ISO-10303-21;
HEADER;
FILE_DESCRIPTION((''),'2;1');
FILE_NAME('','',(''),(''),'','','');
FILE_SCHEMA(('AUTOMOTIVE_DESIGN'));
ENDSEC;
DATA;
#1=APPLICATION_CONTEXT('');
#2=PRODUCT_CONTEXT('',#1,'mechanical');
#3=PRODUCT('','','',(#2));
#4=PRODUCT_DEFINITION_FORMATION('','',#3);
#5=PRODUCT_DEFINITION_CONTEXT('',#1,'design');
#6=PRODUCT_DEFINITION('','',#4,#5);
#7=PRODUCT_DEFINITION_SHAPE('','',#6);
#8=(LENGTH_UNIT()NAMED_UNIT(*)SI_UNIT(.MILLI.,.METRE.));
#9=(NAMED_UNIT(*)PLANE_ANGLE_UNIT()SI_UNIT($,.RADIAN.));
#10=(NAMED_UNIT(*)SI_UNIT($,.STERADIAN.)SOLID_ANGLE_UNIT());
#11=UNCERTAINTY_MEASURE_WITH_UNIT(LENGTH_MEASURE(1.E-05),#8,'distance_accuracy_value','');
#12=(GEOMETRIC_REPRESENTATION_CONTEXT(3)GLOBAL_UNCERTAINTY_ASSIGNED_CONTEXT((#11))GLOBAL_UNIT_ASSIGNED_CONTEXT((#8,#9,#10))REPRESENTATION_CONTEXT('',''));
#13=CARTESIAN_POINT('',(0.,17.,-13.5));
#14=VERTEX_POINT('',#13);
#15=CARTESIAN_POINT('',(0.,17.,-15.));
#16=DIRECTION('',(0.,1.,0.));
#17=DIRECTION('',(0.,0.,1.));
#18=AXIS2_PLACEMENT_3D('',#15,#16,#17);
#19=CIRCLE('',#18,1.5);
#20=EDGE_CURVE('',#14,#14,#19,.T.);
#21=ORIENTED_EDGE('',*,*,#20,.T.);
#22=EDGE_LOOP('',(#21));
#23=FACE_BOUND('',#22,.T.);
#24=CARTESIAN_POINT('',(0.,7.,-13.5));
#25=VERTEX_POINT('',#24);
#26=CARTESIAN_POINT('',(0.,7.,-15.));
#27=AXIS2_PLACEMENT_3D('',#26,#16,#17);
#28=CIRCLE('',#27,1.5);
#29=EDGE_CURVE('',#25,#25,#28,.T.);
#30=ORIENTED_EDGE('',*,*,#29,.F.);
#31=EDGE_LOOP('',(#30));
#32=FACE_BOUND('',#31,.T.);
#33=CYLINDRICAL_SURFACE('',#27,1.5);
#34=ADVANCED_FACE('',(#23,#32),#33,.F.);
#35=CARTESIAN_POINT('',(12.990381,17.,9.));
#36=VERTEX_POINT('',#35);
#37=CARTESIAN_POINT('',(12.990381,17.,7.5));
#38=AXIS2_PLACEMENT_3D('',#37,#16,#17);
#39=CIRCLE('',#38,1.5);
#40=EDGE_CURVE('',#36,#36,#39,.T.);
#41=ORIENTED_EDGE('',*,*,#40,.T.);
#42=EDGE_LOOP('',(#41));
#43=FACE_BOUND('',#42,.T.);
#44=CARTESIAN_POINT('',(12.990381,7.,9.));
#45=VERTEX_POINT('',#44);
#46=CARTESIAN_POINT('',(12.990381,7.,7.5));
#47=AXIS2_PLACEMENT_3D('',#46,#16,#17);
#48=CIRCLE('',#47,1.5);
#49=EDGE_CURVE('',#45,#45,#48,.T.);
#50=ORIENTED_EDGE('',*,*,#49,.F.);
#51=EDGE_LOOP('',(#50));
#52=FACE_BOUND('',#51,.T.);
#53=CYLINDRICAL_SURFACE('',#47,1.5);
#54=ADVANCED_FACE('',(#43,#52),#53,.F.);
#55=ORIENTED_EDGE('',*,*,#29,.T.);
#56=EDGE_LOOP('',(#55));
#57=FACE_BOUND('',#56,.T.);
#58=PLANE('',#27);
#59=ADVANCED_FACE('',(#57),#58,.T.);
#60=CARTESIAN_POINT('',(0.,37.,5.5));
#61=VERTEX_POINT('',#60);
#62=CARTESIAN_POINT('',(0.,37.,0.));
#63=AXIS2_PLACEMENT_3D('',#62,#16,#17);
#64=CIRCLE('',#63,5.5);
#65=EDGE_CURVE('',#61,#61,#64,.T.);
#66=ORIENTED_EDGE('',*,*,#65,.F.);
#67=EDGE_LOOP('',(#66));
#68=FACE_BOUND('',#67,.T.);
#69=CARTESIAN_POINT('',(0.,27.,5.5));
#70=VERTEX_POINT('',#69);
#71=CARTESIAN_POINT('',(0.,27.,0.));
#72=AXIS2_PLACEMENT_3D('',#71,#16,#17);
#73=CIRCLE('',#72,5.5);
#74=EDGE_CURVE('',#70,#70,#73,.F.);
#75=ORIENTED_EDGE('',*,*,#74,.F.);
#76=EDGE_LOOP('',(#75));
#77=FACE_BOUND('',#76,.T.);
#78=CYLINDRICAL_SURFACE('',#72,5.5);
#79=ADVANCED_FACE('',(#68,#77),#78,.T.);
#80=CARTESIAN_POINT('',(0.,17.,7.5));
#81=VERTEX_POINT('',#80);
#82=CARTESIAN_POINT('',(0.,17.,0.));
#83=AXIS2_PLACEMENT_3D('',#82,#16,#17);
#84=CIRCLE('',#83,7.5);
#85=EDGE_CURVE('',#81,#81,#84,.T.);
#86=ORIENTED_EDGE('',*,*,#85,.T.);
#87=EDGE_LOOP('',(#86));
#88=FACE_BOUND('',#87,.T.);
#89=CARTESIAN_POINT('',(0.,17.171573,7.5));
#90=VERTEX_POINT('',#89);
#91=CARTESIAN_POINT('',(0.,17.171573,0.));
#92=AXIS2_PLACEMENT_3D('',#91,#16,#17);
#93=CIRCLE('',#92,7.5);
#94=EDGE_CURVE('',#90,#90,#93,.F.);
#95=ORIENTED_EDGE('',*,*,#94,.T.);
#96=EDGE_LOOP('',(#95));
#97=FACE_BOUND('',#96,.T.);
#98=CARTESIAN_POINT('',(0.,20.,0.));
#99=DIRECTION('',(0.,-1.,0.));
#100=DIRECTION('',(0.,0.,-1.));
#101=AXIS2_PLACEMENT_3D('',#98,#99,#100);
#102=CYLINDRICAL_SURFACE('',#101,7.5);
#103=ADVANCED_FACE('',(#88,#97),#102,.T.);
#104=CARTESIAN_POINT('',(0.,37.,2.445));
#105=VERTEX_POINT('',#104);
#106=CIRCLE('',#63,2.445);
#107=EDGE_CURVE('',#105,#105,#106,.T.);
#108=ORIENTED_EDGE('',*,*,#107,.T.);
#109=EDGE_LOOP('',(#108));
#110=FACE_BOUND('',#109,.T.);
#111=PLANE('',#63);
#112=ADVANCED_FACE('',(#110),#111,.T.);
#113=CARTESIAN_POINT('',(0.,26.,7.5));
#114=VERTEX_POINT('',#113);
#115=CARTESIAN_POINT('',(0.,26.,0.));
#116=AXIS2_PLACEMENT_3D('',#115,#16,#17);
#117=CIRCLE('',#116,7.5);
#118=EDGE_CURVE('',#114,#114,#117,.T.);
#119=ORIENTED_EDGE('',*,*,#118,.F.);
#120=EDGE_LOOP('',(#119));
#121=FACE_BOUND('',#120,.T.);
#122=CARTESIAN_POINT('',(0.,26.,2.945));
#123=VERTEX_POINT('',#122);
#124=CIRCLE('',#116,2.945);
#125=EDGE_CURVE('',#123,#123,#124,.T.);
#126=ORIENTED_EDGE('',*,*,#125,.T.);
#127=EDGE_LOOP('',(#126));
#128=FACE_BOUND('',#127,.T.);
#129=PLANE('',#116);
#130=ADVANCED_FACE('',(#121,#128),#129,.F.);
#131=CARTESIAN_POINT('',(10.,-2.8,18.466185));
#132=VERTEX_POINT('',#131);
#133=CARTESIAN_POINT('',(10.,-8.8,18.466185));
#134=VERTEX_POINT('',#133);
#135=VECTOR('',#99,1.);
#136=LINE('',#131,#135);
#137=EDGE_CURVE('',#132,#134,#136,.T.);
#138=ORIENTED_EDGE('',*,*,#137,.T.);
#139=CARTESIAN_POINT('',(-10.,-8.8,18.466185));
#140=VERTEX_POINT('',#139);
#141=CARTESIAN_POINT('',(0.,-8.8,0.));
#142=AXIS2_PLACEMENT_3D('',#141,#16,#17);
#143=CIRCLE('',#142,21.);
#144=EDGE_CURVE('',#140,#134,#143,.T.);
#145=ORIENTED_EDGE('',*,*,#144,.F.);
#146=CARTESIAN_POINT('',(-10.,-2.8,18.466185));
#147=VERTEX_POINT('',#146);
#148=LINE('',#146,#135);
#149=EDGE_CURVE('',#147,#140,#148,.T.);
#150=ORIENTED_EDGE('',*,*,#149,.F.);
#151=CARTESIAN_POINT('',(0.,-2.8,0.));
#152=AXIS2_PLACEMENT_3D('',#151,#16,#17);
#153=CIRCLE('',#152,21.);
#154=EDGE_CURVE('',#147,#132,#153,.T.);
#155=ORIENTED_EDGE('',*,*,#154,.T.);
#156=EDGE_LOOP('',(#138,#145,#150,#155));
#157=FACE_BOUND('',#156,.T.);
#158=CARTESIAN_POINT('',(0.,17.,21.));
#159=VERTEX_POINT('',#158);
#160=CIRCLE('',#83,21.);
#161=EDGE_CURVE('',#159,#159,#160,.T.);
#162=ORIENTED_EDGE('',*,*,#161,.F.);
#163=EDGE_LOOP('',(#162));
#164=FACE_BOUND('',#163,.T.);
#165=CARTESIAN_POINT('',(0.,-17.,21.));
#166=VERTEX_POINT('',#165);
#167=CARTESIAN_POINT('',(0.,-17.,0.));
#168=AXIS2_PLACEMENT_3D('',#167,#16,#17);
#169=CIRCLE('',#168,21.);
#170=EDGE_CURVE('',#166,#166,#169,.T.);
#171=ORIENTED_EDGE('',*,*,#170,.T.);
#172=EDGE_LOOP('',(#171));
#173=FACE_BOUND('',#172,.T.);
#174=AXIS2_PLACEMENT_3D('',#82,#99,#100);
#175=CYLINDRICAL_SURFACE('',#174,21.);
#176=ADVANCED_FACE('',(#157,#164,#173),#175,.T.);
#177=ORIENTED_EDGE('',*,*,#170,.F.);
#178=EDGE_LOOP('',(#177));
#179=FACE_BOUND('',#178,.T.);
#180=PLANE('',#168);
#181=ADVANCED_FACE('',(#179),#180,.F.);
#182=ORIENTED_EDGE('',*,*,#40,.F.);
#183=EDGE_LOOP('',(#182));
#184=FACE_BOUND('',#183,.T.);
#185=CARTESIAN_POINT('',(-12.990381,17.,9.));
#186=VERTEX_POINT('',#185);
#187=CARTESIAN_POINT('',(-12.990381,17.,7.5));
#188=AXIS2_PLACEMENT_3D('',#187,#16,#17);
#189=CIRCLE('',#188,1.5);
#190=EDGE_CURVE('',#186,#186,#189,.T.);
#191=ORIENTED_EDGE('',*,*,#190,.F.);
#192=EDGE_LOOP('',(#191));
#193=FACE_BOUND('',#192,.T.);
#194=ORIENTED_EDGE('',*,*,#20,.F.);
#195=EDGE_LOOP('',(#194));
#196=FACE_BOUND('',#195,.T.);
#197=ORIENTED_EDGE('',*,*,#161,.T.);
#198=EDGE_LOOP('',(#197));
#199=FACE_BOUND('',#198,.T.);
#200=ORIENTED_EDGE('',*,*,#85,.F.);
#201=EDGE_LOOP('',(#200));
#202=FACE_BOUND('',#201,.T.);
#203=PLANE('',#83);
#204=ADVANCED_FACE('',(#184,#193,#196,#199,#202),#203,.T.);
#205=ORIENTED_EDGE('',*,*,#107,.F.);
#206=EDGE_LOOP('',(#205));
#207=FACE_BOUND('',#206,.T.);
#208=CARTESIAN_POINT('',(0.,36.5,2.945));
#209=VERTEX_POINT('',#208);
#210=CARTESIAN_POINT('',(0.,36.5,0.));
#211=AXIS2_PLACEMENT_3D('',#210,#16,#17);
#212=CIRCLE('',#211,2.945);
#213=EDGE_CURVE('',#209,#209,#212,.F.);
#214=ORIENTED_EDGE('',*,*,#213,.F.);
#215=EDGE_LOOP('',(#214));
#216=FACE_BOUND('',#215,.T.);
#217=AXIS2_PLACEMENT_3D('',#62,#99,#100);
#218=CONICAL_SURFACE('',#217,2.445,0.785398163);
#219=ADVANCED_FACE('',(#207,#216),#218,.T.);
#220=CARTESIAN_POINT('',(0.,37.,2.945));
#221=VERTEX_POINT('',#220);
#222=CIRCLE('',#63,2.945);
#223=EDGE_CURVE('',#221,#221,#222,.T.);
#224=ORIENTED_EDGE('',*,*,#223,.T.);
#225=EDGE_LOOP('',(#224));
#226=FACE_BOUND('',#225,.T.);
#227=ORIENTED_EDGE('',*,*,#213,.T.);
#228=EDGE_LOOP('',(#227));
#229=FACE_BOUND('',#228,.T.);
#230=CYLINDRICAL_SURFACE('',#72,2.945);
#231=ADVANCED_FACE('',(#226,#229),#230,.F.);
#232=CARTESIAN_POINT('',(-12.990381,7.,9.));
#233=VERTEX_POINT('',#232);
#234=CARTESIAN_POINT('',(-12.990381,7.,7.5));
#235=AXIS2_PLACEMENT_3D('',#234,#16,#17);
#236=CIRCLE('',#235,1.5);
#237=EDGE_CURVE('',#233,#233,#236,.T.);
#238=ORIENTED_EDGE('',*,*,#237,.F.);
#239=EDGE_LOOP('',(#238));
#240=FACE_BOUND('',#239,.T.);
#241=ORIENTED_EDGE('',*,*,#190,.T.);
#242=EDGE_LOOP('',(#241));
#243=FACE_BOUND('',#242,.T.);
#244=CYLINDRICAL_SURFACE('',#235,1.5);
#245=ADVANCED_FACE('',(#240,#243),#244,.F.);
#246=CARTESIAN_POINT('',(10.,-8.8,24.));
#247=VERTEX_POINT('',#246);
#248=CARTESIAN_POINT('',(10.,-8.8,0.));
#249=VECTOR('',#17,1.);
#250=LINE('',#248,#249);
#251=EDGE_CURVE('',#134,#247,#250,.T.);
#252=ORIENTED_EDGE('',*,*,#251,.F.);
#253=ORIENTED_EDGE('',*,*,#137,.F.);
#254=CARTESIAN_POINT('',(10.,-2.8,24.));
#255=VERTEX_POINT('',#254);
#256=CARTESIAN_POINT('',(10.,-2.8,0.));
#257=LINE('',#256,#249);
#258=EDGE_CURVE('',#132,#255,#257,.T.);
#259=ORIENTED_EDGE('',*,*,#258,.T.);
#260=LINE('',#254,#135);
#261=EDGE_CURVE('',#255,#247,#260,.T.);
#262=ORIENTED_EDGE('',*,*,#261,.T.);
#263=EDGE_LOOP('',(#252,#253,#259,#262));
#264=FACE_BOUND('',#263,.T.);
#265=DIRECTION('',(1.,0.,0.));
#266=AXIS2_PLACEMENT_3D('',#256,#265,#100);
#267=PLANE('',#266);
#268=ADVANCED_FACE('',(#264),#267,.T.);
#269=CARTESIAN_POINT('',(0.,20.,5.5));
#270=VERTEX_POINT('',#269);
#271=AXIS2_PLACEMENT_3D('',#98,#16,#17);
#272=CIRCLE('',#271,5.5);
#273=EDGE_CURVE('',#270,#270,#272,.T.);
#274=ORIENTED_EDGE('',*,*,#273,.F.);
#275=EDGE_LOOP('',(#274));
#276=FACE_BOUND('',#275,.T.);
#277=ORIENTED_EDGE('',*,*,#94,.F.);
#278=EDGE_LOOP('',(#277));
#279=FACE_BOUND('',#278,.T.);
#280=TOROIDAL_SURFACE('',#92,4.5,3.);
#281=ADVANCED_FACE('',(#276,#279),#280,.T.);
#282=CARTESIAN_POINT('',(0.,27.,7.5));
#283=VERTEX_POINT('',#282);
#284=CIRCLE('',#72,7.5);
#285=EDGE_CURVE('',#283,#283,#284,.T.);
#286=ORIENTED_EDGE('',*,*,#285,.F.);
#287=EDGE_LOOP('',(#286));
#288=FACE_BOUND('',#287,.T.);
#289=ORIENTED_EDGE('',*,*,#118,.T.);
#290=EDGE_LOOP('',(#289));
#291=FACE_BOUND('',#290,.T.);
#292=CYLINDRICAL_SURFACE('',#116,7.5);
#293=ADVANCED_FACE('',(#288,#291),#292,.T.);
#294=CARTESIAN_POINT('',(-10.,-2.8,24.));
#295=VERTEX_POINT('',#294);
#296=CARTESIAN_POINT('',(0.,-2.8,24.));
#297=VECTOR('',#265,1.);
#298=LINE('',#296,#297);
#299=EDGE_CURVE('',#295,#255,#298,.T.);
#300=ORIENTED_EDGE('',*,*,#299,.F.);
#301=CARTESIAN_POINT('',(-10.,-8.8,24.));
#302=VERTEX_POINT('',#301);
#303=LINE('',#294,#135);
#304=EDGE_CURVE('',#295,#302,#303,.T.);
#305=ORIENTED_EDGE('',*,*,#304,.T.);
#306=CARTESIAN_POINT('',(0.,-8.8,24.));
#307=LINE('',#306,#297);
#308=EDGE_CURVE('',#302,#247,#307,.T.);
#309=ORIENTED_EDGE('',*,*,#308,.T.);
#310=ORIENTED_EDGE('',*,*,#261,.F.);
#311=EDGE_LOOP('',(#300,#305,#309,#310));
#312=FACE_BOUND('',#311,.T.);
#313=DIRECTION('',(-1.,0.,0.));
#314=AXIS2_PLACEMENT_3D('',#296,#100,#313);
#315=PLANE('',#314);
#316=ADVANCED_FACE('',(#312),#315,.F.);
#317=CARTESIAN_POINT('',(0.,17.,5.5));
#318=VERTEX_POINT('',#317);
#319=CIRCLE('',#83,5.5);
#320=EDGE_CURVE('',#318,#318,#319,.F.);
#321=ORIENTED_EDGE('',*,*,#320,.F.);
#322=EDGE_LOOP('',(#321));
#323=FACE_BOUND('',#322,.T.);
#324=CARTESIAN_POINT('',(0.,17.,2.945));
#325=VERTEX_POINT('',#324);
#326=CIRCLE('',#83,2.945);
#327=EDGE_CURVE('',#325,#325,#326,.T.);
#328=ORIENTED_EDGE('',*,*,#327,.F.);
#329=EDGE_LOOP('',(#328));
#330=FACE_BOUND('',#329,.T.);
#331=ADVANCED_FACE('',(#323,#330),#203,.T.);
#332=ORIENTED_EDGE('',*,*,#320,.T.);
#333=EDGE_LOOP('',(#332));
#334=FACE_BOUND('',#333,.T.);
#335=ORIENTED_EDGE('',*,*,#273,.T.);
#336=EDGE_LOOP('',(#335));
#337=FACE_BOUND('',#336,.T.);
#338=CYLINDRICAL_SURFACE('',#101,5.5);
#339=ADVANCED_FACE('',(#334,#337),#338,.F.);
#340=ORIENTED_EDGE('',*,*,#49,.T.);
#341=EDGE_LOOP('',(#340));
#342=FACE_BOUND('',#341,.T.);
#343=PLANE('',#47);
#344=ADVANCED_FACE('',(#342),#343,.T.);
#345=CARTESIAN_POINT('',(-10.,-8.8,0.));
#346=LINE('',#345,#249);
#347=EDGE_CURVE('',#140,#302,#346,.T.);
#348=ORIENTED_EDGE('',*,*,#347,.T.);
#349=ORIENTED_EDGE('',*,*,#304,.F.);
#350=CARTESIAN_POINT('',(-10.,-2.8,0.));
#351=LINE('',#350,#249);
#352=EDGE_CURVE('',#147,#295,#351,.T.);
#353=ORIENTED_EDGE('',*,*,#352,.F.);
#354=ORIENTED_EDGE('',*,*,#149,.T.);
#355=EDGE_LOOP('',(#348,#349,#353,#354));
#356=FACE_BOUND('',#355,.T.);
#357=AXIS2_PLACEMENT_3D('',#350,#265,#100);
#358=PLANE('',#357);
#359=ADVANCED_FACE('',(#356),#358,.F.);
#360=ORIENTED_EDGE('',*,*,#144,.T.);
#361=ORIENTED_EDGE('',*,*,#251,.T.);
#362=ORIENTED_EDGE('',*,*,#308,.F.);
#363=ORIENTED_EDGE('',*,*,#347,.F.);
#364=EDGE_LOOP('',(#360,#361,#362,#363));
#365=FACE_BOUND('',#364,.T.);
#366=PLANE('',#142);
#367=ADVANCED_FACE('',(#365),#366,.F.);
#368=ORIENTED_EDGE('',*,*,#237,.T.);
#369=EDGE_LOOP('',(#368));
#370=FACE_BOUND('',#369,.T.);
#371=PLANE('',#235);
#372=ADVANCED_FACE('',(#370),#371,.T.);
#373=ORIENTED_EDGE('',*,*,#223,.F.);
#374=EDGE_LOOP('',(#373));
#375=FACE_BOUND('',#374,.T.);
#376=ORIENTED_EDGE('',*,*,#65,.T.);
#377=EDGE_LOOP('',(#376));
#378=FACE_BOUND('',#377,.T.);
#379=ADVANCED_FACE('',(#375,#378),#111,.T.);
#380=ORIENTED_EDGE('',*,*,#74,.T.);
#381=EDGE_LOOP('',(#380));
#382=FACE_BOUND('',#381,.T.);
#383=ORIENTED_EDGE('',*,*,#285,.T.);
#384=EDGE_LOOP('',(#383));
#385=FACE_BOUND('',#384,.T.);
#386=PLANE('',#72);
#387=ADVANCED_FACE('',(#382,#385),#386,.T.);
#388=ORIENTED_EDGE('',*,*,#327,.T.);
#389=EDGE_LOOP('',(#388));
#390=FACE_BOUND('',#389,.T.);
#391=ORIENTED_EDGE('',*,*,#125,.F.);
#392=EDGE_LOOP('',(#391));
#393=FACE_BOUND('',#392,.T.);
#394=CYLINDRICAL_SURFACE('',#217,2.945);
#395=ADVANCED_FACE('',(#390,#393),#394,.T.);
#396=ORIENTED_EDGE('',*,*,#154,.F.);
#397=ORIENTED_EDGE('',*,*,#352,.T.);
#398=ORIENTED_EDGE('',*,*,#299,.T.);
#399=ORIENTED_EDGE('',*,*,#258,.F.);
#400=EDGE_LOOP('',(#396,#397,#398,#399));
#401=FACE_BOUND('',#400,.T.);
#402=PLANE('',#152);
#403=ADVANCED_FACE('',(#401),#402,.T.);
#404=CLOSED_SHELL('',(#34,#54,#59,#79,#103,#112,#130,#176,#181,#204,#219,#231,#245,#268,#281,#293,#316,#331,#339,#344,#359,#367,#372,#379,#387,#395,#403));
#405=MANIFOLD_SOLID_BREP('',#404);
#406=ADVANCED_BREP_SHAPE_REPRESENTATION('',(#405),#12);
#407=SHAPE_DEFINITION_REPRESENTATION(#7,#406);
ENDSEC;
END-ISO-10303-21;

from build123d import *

# Parameters (mm, degrees)
SKETCH1_R           = 21
SKETCH1_R_2         = 1.5
SKETCH1_R_3         = 7.5
SKETCH1_R_4         = 5.5
SKETCH1_R_5         = 2.945
BOSS_EXTRUDE1_DEPTH = 17
CUT_EXTRUDE1_START  = 17
SKETCH1_3_R         = 1.5
CUT_EXTRUDE1_DEPTH  = 10
BOSS_EXTRUDE2_START = 17
SKETCH1_4_R         = 7.5
SKETCH1_4_R_2       = 5.5
BOSS_EXTRUDE2_DEPTH = 3
FILLET1_R           = 3
BOSS_EXTRUDE3_START = 17
SKETCH1_5_R         = 2.945
BOSS_EXTRUDE3_DEPTH = 20
BOSS_EXTRUDE4_START = -2.8
BOSS_EXTRUDE4_DEPTH = 6
CHAMFER1_SIZE       = 0.5
BOSS_EXTRUDE6_START = 27
SKETCH1_10_R        = 5.5
SKETCH1_10_R_2      = 2.945
BOSS_EXTRUDE6_DEPTH = 10
BOSS_EXTRUDE7_START = 26
SKETCH1_12_R        = 7.5
SKETCH1_12_R_2      = 5.5
SKETCH1_12_R_3      = 2.945
BOSS_EXTRUDE7_DEPTH = 1


with BuildPart() as part:
    # Sketch1 → Boss-Extrude1 (new, symmetric)
    # profile 1 of 7: a face of its own
    with BuildSketch(Plane(origin=(0, 0, 0), x_dir=(1, 0, 0), z_dir=(0, 1, 0))):
        with Locations(Location((0, 0, 0), (0, 0, 270))):
            Circle(SKETCH1_R)
        with Locations((12.990381057, -7.5)):
            Circle(SKETCH1_R_2, mode=Mode.SUBTRACT)
        with Locations((-12.990381057, -7.5)):
            Circle(SKETCH1_R_2, mode=Mode.SUBTRACT)
        with Locations((0, 15)):
            Circle(SKETCH1_R_2, mode=Mode.SUBTRACT)
        Circle(SKETCH1_R_3, mode=Mode.SUBTRACT)
    # profile 2 of 7: a face of its own
    with BuildSketch(Plane(origin=(0, 0, 0), x_dir=(1, 0, 0), z_dir=(0, 1, 0))):
        Circle(SKETCH1_R_3)
        Circle(SKETCH1_R_4, mode=Mode.SUBTRACT)
    # profile 3 of 7: a face of its own
    with BuildSketch(Plane(origin=(0, 0, 0), x_dir=(1, 0, 0), z_dir=(0, 1, 0))):
        Circle(SKETCH1_R_4)
        Circle(SKETCH1_R_5, mode=Mode.SUBTRACT)
    # profile 4 of 7: a face of its own
    with BuildSketch(Plane(origin=(0, 0, 0), x_dir=(1, 0, 0), z_dir=(0, 1, 0))):
        Circle(SKETCH1_R_5)
    # profile 5 of 7: a face of its own
    with BuildSketch(Plane(origin=(0, 0, 0), x_dir=(1, 0, 0), z_dir=(0, 1, 0))):
        with Locations((-12.990381057, -7.5)):
            Circle(SKETCH1_R_2)
    # profile 6 of 7: a face of its own
    with BuildSketch(Plane(origin=(0, 0, 0), x_dir=(1, 0, 0), z_dir=(0, 1, 0))):
        with Locations((12.990381057, -7.5)):
            Circle(SKETCH1_R_2)
    # profile 7 of 7: a face of its own
    with BuildSketch(Plane(origin=(0, 0, 0), x_dir=(1, 0, 0), z_dir=(0, 1, 0))):
        with Locations((0, 15)):
            Circle(SKETCH1_R_2)
    extrude(amount=BOSS_EXTRUDE1_DEPTH, both=True)

    # Sketch1<3> → Cut-Extrude1 (cut)
    with BuildSketch(Plane(origin=(0, 0, 0), x_dir=(1, 0, 0), z_dir=(0, 1, 0)).offset(CUT_EXTRUDE1_START)):
        with Locations(Location((-12.990381057, -7.5, 0), (0, 0, 270))):
            Circle(SKETCH1_3_R)
        with Locations(Location((12.990381057, -7.5, 0), (0, 0, 270))):
            Circle(SKETCH1_3_R)
        with Locations(Location((0, 15, 0), (0, 0, 270))):
            Circle(SKETCH1_3_R)
    extrude(amount=-CUT_EXTRUDE1_DEPTH, mode=Mode.SUBTRACT)

    # Sketch1<4> → Boss-Extrude2 (add)
    with BuildSketch(Plane(origin=(0, 0, 0), x_dir=(1, 0, 0), z_dir=(0, 1, 0)).offset(BOSS_EXTRUDE2_START)):
        with Locations(Location((0, 0, 0), (0, 0, 270))):
            Circle(SKETCH1_4_R)
        with Locations(Location((0, 0, 0), (0, 0, 270))):
            Circle(SKETCH1_4_R_2, mode=Mode.SUBTRACT)
    extrude(amount=BOSS_EXTRUDE2_DEPTH)

    # Fillet1
    # the kernel refuses this fillet: 3 mm, written as the material it takes off along each edge
    with BuildSketch(Plane(origin=(0, 20, 0), x_dir=(0, 0, 1), z_dir=(-1, 0, 0))) as fillet1_piece_1:
        with BuildLine():
            CenterArc((4.5, -2.828427125), FILLET1_R, 0, 70.528779366)
            Line((5.5, 0), (5.52, 0.056568542))
            ThreePointArc((5.52, 0.056568542), (6.5, 0.06), (7.5, 0.06))
            Line((7.5, 0.06), (7.56, 0))
            Line((7.56, 0), (7.56, -2.828427125))
            Line((7.56, -2.828427125), (7.5, -2.828427125))
        make_face()
    revolve(axis=Axis((0, 20, 0), (0, 1, 0)), mode=Mode.SUBTRACT)

    # Sketch1<5> → Boss-Extrude3 (add)
    with BuildSketch(Plane(origin=(0, 0, 0), x_dir=(1, 0, 0), z_dir=(0, 1, 0)).offset(BOSS_EXTRUDE3_START)):
        with Locations(Location((0, 0, 0), (0, 0, 270))):
            Circle(SKETCH1_5_R)
    extrude(amount=BOSS_EXTRUDE3_DEPTH)

    # Sketch1<8> → Boss-Extrude4 (add)
    with BuildSketch(Plane(origin=(0, 0, 0), x_dir=(1, 0, 0), z_dir=(0, 1, 0)).offset(BOSS_EXTRUDE4_START)):
        with BuildLine():
            ThreePointArc((10, -18.466185313), (0, -21), (-10, -18.466185313))
            Line((-10, -18.466185313), (-10, -24))
            Line((-10, -24), (10, -24))
            Line((10, -24), (10, -18.466185313))
        make_face()
    extrude(amount=-BOSS_EXTRUDE4_DEPTH)

    # Chamfer1
    chamfer1_edges = [part.edges().sort_by_distance(p)[0] for p in [
        (0, 37, -2.945),
    ]]
    chamfer(chamfer1_edges, length=CHAMFER1_SIZE)

    # Sketch1<10> → Boss-Extrude6 (add)
    with BuildSketch(Plane(origin=(0, 0, 0), x_dir=(1, 0, 0), z_dir=(0, 1, 0)).offset(BOSS_EXTRUDE6_START)):
        with Locations(Location((0, 0, 0), (0, 0, 270))):
            Circle(SKETCH1_10_R)
        with Locations(Location((0, 0, 0), (0, 0, 270))):
            Circle(SKETCH1_10_R_2, mode=Mode.SUBTRACT)
    extrude(amount=BOSS_EXTRUDE6_DEPTH)

    # Sketch1<12> → Boss-Extrude7 (add)
    # profile 1 of 2: a face of its own
    with BuildSketch(Plane(origin=(0, 0, 0), x_dir=(1, 0, 0), z_dir=(0, 1, 0)).offset(BOSS_EXTRUDE7_START)):
        with Locations(Location((0, 0, 0), (0, 0, 270))):
            Circle(SKETCH1_12_R)
        with Locations(Location((0, 0, 0), (0, 0, 270))):
            Circle(SKETCH1_12_R_2, mode=Mode.SUBTRACT)
    # profile 2 of 2: a face of its own
    with BuildSketch(Plane(origin=(0, 0, 0), x_dir=(1, 0, 0), z_dir=(0, 1, 0)).offset(BOSS_EXTRUDE7_START)):
        with Locations(Location((0, 0, 0), (0, 0, 270))):
            Circle(SKETCH1_12_R_2)
        with Locations(Location((0, 0, 0), (0, 0, 270))):
            Circle(SKETCH1_12_R_3, mode=Mode.SUBTRACT)
    extrude(amount=BOSS_EXTRUDE7_DEPTH)


solid = part.part
